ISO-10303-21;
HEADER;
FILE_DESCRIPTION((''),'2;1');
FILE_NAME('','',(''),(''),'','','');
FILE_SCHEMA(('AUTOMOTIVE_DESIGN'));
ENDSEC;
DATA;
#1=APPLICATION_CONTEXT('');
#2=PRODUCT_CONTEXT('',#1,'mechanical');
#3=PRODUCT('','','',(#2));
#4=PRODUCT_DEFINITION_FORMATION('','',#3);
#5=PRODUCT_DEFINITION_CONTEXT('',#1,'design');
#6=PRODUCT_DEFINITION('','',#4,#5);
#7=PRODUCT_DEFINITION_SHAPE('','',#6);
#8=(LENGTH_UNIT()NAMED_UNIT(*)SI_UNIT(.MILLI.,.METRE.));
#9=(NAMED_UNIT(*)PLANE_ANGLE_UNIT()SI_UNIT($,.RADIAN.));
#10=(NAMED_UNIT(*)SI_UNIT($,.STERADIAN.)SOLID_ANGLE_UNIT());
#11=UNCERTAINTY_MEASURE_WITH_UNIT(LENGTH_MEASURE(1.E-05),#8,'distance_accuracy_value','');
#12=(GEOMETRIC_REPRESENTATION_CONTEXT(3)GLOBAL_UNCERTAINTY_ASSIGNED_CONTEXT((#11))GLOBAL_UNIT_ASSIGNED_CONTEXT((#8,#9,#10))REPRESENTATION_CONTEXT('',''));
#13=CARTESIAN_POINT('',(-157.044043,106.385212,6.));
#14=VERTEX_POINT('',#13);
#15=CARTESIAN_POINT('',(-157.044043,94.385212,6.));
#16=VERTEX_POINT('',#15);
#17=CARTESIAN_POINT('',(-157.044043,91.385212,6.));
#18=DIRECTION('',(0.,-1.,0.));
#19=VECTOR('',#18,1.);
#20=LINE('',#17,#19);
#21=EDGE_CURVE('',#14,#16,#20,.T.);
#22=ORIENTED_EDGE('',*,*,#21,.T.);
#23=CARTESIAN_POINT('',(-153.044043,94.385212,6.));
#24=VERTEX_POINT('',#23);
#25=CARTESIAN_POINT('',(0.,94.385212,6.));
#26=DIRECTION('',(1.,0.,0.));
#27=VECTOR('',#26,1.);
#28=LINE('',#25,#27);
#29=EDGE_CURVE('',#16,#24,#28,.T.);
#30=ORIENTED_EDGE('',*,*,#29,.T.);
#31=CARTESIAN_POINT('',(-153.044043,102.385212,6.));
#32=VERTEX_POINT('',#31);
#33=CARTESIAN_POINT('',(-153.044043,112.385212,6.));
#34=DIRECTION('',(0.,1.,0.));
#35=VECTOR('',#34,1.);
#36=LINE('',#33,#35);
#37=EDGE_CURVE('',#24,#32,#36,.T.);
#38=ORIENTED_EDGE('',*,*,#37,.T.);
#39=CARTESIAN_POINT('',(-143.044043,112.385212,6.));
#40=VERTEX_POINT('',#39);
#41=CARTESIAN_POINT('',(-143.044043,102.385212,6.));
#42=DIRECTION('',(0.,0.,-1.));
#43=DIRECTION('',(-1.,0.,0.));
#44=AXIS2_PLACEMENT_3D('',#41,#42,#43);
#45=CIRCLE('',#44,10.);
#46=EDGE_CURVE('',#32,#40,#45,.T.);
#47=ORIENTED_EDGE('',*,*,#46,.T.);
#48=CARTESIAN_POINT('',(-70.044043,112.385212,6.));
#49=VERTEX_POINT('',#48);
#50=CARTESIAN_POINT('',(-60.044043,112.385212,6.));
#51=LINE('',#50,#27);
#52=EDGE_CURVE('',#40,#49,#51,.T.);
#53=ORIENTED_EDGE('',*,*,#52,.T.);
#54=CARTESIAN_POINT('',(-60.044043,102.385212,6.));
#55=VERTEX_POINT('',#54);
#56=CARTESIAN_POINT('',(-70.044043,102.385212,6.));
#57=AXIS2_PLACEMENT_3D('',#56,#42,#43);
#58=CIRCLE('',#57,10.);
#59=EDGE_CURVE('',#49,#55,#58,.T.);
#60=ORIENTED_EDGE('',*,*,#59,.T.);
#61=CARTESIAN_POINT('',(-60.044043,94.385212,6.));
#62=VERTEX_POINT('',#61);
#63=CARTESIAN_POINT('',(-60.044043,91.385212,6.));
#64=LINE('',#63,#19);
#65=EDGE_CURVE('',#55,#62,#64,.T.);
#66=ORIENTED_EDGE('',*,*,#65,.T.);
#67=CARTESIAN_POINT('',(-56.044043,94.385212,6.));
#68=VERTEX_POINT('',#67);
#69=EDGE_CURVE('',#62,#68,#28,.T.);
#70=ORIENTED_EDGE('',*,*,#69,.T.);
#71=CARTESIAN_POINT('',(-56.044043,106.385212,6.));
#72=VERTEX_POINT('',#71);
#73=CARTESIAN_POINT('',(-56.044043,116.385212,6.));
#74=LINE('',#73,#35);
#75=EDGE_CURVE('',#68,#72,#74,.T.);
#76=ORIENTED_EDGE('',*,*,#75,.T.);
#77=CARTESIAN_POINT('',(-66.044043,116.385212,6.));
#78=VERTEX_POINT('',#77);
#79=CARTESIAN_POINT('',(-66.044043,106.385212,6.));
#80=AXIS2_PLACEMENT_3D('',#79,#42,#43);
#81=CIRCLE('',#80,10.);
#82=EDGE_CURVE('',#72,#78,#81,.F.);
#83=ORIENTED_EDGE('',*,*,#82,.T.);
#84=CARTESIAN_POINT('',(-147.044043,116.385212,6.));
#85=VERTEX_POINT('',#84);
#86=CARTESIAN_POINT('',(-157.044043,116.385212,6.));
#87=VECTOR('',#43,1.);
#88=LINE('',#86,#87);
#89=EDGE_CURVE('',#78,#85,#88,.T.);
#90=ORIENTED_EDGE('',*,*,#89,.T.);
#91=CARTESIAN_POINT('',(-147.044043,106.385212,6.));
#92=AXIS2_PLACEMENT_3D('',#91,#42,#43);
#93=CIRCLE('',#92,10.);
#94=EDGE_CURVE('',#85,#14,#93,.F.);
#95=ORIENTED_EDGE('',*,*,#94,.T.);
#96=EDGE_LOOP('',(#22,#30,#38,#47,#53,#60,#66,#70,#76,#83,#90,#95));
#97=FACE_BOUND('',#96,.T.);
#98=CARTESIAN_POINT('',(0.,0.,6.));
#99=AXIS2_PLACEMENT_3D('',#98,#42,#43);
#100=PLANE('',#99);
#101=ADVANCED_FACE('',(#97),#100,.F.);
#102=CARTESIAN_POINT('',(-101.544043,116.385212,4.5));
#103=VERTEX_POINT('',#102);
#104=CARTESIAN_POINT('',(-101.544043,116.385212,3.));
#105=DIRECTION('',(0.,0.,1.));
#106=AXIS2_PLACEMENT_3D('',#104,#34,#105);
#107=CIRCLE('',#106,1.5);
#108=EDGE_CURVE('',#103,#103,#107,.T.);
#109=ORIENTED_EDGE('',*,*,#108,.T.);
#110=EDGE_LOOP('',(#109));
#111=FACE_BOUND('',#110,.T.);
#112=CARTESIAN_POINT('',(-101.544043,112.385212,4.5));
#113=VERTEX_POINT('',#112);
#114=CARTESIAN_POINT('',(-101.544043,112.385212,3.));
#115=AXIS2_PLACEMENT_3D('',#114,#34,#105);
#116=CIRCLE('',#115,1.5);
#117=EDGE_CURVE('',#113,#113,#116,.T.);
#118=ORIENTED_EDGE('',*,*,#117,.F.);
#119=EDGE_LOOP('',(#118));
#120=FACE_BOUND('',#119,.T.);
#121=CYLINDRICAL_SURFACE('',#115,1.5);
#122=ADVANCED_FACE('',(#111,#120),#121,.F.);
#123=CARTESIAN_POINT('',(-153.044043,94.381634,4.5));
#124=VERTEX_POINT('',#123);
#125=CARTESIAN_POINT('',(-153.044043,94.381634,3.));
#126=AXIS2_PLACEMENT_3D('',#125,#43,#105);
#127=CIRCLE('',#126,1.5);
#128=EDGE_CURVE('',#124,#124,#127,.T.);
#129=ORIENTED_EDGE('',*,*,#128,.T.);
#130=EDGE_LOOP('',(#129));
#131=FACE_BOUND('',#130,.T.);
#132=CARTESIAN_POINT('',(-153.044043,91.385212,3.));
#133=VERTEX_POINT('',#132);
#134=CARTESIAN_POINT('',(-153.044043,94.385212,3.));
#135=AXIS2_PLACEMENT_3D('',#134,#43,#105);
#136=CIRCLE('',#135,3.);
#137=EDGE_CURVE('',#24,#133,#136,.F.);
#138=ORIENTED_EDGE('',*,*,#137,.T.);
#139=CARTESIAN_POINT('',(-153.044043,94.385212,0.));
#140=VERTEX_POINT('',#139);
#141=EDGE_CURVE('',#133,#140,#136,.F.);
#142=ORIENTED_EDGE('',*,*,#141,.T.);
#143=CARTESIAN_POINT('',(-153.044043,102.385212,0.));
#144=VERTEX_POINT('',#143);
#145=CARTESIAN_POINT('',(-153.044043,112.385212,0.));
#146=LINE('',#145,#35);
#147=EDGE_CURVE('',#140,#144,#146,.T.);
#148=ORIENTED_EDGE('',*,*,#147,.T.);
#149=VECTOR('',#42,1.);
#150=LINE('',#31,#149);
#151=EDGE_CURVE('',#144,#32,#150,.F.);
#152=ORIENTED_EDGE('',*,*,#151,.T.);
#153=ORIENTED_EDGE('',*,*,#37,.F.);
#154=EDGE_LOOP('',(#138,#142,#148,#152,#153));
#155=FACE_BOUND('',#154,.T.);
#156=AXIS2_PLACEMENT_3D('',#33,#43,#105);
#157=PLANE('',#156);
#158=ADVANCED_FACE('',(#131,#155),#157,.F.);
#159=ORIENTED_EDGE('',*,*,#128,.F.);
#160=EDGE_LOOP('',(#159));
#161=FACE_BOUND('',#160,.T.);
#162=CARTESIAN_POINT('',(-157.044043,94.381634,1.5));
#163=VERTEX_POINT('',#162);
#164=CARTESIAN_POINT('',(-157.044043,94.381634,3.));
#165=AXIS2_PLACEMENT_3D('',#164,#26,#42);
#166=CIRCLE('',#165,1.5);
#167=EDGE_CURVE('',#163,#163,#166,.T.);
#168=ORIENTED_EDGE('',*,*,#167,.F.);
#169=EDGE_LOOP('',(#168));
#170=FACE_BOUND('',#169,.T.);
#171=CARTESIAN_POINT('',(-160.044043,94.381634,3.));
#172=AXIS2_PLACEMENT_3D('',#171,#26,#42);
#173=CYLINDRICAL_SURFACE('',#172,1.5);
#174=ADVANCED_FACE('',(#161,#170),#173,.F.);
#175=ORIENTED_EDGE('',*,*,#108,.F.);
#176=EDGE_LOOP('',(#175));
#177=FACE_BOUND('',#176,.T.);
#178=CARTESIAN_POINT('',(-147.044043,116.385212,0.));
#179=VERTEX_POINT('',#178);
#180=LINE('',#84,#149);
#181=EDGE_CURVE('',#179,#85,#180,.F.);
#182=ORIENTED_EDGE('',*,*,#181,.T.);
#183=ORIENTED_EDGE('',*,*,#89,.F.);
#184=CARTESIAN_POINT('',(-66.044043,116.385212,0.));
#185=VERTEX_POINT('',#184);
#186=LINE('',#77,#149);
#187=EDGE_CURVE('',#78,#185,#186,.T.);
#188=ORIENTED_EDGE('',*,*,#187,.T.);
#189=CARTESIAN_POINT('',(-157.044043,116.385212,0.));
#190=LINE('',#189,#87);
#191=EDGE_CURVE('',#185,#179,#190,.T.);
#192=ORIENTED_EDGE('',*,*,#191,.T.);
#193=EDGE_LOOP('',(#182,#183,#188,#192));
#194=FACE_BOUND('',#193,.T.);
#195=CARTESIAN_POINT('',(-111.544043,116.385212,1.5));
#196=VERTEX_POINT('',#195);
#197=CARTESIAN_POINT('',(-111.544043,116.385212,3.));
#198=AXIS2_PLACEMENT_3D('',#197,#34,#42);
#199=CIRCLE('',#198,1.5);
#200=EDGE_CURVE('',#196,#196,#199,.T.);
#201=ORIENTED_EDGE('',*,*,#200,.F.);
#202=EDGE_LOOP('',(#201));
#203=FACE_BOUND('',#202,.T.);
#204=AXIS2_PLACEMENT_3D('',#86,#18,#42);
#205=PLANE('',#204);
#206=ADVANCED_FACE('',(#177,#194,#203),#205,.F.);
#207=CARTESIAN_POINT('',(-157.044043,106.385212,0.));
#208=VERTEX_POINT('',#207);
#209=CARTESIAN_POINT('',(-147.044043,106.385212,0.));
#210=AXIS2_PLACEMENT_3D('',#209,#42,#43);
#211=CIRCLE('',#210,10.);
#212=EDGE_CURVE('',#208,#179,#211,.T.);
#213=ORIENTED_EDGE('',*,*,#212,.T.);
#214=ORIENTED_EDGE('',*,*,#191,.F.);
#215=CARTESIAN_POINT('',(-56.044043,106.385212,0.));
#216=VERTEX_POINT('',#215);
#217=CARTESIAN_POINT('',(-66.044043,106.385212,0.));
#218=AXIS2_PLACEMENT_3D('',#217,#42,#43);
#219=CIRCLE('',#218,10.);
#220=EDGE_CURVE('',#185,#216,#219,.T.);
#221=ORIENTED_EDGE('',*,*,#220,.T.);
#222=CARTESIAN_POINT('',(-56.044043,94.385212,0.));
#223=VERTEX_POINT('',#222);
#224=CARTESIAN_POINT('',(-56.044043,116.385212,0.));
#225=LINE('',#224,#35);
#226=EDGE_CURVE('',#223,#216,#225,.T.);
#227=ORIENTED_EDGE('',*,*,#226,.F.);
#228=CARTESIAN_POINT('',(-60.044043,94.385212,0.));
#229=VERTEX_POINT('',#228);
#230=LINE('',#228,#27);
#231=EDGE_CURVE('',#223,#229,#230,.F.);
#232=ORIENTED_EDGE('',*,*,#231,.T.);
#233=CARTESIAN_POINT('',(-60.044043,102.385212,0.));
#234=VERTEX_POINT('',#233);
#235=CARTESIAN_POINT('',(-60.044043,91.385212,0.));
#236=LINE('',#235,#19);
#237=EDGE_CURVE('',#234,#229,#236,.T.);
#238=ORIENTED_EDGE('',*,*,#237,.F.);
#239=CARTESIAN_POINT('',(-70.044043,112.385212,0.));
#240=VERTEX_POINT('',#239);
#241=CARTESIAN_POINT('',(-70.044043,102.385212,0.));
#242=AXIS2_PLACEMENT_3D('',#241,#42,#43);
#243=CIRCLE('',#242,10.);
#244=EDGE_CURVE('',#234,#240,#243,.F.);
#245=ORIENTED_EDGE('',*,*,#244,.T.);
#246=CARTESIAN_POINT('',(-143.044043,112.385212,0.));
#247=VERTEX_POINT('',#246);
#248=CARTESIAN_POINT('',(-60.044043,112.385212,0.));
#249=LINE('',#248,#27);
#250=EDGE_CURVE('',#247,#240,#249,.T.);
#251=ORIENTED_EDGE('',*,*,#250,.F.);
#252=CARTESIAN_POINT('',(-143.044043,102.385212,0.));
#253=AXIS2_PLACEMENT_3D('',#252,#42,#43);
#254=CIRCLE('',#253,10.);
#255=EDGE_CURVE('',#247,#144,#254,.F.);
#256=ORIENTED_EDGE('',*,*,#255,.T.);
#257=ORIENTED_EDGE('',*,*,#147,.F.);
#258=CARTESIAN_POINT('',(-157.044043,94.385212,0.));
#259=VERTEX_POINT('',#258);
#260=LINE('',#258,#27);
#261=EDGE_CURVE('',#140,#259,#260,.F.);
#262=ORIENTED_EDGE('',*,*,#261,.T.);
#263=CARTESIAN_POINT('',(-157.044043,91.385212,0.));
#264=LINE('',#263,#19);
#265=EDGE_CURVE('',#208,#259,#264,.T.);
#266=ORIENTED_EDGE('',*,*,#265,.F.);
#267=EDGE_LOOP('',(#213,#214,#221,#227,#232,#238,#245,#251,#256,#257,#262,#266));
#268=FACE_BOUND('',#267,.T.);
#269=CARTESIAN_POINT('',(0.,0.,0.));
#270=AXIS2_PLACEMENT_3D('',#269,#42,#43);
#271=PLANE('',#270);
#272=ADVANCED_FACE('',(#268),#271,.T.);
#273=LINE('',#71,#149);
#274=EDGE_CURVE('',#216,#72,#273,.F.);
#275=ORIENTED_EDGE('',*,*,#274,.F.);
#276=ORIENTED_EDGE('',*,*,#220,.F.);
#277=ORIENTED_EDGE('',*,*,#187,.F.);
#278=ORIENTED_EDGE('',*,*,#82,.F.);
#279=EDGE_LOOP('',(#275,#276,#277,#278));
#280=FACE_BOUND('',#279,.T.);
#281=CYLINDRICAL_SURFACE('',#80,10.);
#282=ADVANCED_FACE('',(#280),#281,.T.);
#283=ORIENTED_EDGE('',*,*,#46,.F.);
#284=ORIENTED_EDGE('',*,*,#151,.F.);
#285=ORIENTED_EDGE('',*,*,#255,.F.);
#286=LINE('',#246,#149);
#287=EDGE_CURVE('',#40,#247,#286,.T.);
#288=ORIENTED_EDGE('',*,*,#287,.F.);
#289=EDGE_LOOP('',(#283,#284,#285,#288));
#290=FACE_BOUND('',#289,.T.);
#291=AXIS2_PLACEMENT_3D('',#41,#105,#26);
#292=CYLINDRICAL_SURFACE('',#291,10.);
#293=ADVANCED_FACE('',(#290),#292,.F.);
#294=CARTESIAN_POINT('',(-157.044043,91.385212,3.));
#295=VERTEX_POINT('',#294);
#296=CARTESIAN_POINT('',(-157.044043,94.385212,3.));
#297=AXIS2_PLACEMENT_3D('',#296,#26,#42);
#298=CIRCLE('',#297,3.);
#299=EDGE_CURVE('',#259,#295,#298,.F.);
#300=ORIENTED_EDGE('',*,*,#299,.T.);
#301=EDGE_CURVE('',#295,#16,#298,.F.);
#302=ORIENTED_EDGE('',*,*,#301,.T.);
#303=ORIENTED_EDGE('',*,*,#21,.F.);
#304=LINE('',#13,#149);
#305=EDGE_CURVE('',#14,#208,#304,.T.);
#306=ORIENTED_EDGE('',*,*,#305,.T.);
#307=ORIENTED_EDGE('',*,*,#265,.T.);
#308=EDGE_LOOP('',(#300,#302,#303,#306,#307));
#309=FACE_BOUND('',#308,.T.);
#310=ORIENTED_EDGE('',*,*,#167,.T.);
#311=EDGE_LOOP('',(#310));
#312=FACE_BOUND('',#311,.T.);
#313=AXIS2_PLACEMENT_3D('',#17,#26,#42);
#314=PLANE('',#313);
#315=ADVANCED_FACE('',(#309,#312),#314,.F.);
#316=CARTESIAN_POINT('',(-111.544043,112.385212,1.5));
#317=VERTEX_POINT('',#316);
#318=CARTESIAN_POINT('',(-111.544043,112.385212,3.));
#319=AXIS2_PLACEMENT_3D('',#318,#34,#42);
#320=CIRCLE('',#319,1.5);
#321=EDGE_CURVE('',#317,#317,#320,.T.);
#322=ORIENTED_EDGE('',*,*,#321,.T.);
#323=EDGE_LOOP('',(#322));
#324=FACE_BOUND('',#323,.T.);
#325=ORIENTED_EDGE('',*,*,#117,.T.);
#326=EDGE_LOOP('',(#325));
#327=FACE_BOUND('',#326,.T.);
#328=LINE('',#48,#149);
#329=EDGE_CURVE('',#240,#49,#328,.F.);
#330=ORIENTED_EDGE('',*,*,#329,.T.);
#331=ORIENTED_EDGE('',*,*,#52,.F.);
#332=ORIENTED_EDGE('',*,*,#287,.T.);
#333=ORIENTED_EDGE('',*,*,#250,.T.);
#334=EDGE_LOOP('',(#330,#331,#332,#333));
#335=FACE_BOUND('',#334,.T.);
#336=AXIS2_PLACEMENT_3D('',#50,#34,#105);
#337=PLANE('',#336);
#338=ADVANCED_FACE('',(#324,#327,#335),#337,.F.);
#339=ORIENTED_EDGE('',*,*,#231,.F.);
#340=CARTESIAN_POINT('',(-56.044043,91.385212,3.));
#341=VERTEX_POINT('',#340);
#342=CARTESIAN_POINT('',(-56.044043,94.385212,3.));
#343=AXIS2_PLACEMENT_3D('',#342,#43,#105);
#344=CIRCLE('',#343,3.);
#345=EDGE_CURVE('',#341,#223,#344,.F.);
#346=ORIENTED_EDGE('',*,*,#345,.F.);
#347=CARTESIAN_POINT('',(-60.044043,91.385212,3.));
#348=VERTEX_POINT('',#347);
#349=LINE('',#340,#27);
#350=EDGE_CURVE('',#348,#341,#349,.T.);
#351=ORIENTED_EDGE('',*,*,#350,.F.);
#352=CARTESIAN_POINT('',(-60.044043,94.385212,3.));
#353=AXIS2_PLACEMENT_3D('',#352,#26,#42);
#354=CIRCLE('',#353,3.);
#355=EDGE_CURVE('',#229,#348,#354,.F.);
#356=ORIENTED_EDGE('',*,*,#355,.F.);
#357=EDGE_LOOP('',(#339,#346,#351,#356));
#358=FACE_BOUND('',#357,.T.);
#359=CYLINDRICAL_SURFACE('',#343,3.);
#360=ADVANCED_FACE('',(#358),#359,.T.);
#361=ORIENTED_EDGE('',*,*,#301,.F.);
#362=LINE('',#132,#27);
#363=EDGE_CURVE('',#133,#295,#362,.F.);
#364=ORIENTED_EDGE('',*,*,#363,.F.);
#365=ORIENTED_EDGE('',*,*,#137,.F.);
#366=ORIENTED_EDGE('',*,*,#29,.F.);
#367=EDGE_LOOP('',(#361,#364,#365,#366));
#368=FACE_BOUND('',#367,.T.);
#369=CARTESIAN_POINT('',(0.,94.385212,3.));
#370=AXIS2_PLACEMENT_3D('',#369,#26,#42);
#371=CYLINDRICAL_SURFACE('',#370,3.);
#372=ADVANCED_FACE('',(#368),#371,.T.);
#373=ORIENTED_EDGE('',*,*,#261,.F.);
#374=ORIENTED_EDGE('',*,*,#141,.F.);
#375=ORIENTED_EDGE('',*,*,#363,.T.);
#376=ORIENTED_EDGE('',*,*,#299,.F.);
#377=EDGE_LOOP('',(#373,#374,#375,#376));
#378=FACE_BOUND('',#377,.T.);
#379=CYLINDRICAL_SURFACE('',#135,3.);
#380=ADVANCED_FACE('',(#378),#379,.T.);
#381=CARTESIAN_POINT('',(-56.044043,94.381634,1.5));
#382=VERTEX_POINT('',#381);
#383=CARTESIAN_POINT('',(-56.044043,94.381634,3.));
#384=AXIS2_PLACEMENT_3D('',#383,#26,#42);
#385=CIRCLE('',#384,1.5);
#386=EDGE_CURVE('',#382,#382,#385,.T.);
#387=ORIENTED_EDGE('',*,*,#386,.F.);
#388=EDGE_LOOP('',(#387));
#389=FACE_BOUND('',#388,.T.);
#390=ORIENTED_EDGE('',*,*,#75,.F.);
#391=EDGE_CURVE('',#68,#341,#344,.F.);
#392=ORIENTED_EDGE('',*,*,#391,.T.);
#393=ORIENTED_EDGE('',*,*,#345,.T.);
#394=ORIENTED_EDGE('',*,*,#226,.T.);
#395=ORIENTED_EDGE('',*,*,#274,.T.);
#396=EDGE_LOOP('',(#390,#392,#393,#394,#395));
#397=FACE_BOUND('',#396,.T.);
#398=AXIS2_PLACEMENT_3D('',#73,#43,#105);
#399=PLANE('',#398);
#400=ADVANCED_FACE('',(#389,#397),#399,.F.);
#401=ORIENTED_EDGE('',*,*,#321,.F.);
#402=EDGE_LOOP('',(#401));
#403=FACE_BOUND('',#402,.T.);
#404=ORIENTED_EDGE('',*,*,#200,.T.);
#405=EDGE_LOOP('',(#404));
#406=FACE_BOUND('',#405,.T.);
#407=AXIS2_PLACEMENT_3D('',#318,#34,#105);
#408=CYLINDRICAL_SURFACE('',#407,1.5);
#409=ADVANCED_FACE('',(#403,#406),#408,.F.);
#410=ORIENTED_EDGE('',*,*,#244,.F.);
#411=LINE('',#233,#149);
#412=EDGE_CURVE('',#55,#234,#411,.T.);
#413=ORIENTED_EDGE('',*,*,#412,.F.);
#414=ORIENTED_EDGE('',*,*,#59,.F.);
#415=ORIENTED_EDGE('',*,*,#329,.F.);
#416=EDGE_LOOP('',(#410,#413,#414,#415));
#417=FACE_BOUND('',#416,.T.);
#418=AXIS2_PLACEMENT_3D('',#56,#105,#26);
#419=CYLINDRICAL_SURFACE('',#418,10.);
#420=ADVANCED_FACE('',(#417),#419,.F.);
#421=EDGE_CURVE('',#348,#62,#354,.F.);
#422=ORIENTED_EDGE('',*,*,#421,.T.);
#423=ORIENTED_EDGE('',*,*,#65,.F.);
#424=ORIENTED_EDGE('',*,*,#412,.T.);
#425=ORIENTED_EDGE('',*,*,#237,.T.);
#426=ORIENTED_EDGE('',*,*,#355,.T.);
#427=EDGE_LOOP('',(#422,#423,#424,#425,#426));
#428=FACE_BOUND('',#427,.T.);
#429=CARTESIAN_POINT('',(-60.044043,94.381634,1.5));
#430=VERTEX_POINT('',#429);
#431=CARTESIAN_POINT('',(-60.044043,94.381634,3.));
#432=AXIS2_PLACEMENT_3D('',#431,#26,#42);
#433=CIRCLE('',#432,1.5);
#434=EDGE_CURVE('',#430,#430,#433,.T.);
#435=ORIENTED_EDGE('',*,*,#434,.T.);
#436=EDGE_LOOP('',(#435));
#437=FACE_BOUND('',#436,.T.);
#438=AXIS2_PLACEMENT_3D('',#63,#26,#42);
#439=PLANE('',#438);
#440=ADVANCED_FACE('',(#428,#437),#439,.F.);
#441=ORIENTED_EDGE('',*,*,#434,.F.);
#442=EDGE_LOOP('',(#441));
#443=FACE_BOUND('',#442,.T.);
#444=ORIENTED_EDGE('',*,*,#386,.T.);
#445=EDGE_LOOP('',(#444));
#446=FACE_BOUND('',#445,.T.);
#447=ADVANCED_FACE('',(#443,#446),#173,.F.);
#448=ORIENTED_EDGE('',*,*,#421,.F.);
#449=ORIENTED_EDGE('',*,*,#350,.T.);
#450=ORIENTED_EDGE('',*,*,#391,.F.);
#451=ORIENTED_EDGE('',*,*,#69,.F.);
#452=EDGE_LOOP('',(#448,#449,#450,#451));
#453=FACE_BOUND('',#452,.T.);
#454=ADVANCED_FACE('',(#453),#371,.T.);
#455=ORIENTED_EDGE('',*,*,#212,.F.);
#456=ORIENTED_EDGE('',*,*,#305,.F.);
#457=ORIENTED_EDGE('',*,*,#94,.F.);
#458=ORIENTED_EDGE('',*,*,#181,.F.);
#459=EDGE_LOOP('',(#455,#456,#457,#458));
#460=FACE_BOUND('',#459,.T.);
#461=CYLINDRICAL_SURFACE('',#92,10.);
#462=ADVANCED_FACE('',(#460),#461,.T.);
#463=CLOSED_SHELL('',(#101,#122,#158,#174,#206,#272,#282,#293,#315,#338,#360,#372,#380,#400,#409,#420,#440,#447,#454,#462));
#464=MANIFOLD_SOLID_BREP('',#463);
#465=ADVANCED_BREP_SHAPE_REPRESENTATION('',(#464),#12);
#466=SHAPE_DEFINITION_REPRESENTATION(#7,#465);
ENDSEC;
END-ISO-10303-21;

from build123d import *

# Parameters (mm, degrees)
BOSS_EXTRUDE1_DEPTH = 6
SKETCH2_R           = 1.5
CUT_EXTRUDE1_DEPTH  = 104
FILLET1_R           = 10
FILLET2_R           = 3
SKETCH3_R           = 1.5
CUT_EXTRUDE2_DEPTH  = 4


with BuildPart() as part:
    # Sketch1 → Boss-Extrude1 (new body)
    with BuildSketch(Plane.XY):
        Polygon((-157.044043164, 91.385212048), (-157.044043164, 116.385212048), (-56.044043164, 116.385212048), (-56.044043164, 91.385212048), (-60.044043164, 91.385212048), (-60.044043164, 112.385212048), (-153.044043164, 112.385212048), (-153.044043164, 91.385212048), align=None)
    extrude(amount=BOSS_EXTRUDE1_DEPTH)

    # Sketch2 → Cut-Extrude1 (cut)
    with BuildSketch(Plane(origin=(-56.044043164, 0, 0), x_dir=(0, 0, -1), z_dir=(1, 0, 0))):
        with Locations((-3, 94.381633834)):
            Circle(SKETCH2_R)
    extrude(amount=-CUT_EXTRUDE1_DEPTH, mode=Mode.SUBTRACT)

    # Fillet1
    fillet1_edges = [part.edges().sort_by_distance(p)[0] for p in [
        (-157.044043164, 116.385212048, 3),
        (-56.044043164, 116.385212048, 3),
        (-60.044043164, 112.385212048, 3),
        (-153.044043164, 112.385212048, 3),
    ]]
    fillet(fillet1_edges, radius=FILLET1_R)

    # Fillet2
    fillet2_edges = [part.edges().sort_by_distance(p)[0] for p in [
        (-58.044043164, 91.385212048, 6),
        (-58.044043164, 91.385212048, 0),
        (-155.044043164, 91.385212048, 0),
        (-155.044043164, 91.385212048, 6),
    ]]
    fillet(fillet2_edges, radius=FILLET2_R - 0.0001)  # a hair under: the kernel refuses the full size

    # Sketch3 → Cut-Extrude2 (cut)
    with BuildSketch(Plane(origin=(0, 116.385212048, 0), x_dir=(1, 0, 0), z_dir=(0, 1, 0))):
        with Locations(Location((-101.544043164, -3, 0), (0, 0, 270))):
            Circle(SKETCH3_R)
        with Locations(Location((-111.544043164, -3, 0), (0, 0, 90))):
            Circle(SKETCH3_R)
    extrude(amount=-CUT_EXTRUDE2_DEPTH, mode=Mode.SUBTRACT)


solid = part.part
